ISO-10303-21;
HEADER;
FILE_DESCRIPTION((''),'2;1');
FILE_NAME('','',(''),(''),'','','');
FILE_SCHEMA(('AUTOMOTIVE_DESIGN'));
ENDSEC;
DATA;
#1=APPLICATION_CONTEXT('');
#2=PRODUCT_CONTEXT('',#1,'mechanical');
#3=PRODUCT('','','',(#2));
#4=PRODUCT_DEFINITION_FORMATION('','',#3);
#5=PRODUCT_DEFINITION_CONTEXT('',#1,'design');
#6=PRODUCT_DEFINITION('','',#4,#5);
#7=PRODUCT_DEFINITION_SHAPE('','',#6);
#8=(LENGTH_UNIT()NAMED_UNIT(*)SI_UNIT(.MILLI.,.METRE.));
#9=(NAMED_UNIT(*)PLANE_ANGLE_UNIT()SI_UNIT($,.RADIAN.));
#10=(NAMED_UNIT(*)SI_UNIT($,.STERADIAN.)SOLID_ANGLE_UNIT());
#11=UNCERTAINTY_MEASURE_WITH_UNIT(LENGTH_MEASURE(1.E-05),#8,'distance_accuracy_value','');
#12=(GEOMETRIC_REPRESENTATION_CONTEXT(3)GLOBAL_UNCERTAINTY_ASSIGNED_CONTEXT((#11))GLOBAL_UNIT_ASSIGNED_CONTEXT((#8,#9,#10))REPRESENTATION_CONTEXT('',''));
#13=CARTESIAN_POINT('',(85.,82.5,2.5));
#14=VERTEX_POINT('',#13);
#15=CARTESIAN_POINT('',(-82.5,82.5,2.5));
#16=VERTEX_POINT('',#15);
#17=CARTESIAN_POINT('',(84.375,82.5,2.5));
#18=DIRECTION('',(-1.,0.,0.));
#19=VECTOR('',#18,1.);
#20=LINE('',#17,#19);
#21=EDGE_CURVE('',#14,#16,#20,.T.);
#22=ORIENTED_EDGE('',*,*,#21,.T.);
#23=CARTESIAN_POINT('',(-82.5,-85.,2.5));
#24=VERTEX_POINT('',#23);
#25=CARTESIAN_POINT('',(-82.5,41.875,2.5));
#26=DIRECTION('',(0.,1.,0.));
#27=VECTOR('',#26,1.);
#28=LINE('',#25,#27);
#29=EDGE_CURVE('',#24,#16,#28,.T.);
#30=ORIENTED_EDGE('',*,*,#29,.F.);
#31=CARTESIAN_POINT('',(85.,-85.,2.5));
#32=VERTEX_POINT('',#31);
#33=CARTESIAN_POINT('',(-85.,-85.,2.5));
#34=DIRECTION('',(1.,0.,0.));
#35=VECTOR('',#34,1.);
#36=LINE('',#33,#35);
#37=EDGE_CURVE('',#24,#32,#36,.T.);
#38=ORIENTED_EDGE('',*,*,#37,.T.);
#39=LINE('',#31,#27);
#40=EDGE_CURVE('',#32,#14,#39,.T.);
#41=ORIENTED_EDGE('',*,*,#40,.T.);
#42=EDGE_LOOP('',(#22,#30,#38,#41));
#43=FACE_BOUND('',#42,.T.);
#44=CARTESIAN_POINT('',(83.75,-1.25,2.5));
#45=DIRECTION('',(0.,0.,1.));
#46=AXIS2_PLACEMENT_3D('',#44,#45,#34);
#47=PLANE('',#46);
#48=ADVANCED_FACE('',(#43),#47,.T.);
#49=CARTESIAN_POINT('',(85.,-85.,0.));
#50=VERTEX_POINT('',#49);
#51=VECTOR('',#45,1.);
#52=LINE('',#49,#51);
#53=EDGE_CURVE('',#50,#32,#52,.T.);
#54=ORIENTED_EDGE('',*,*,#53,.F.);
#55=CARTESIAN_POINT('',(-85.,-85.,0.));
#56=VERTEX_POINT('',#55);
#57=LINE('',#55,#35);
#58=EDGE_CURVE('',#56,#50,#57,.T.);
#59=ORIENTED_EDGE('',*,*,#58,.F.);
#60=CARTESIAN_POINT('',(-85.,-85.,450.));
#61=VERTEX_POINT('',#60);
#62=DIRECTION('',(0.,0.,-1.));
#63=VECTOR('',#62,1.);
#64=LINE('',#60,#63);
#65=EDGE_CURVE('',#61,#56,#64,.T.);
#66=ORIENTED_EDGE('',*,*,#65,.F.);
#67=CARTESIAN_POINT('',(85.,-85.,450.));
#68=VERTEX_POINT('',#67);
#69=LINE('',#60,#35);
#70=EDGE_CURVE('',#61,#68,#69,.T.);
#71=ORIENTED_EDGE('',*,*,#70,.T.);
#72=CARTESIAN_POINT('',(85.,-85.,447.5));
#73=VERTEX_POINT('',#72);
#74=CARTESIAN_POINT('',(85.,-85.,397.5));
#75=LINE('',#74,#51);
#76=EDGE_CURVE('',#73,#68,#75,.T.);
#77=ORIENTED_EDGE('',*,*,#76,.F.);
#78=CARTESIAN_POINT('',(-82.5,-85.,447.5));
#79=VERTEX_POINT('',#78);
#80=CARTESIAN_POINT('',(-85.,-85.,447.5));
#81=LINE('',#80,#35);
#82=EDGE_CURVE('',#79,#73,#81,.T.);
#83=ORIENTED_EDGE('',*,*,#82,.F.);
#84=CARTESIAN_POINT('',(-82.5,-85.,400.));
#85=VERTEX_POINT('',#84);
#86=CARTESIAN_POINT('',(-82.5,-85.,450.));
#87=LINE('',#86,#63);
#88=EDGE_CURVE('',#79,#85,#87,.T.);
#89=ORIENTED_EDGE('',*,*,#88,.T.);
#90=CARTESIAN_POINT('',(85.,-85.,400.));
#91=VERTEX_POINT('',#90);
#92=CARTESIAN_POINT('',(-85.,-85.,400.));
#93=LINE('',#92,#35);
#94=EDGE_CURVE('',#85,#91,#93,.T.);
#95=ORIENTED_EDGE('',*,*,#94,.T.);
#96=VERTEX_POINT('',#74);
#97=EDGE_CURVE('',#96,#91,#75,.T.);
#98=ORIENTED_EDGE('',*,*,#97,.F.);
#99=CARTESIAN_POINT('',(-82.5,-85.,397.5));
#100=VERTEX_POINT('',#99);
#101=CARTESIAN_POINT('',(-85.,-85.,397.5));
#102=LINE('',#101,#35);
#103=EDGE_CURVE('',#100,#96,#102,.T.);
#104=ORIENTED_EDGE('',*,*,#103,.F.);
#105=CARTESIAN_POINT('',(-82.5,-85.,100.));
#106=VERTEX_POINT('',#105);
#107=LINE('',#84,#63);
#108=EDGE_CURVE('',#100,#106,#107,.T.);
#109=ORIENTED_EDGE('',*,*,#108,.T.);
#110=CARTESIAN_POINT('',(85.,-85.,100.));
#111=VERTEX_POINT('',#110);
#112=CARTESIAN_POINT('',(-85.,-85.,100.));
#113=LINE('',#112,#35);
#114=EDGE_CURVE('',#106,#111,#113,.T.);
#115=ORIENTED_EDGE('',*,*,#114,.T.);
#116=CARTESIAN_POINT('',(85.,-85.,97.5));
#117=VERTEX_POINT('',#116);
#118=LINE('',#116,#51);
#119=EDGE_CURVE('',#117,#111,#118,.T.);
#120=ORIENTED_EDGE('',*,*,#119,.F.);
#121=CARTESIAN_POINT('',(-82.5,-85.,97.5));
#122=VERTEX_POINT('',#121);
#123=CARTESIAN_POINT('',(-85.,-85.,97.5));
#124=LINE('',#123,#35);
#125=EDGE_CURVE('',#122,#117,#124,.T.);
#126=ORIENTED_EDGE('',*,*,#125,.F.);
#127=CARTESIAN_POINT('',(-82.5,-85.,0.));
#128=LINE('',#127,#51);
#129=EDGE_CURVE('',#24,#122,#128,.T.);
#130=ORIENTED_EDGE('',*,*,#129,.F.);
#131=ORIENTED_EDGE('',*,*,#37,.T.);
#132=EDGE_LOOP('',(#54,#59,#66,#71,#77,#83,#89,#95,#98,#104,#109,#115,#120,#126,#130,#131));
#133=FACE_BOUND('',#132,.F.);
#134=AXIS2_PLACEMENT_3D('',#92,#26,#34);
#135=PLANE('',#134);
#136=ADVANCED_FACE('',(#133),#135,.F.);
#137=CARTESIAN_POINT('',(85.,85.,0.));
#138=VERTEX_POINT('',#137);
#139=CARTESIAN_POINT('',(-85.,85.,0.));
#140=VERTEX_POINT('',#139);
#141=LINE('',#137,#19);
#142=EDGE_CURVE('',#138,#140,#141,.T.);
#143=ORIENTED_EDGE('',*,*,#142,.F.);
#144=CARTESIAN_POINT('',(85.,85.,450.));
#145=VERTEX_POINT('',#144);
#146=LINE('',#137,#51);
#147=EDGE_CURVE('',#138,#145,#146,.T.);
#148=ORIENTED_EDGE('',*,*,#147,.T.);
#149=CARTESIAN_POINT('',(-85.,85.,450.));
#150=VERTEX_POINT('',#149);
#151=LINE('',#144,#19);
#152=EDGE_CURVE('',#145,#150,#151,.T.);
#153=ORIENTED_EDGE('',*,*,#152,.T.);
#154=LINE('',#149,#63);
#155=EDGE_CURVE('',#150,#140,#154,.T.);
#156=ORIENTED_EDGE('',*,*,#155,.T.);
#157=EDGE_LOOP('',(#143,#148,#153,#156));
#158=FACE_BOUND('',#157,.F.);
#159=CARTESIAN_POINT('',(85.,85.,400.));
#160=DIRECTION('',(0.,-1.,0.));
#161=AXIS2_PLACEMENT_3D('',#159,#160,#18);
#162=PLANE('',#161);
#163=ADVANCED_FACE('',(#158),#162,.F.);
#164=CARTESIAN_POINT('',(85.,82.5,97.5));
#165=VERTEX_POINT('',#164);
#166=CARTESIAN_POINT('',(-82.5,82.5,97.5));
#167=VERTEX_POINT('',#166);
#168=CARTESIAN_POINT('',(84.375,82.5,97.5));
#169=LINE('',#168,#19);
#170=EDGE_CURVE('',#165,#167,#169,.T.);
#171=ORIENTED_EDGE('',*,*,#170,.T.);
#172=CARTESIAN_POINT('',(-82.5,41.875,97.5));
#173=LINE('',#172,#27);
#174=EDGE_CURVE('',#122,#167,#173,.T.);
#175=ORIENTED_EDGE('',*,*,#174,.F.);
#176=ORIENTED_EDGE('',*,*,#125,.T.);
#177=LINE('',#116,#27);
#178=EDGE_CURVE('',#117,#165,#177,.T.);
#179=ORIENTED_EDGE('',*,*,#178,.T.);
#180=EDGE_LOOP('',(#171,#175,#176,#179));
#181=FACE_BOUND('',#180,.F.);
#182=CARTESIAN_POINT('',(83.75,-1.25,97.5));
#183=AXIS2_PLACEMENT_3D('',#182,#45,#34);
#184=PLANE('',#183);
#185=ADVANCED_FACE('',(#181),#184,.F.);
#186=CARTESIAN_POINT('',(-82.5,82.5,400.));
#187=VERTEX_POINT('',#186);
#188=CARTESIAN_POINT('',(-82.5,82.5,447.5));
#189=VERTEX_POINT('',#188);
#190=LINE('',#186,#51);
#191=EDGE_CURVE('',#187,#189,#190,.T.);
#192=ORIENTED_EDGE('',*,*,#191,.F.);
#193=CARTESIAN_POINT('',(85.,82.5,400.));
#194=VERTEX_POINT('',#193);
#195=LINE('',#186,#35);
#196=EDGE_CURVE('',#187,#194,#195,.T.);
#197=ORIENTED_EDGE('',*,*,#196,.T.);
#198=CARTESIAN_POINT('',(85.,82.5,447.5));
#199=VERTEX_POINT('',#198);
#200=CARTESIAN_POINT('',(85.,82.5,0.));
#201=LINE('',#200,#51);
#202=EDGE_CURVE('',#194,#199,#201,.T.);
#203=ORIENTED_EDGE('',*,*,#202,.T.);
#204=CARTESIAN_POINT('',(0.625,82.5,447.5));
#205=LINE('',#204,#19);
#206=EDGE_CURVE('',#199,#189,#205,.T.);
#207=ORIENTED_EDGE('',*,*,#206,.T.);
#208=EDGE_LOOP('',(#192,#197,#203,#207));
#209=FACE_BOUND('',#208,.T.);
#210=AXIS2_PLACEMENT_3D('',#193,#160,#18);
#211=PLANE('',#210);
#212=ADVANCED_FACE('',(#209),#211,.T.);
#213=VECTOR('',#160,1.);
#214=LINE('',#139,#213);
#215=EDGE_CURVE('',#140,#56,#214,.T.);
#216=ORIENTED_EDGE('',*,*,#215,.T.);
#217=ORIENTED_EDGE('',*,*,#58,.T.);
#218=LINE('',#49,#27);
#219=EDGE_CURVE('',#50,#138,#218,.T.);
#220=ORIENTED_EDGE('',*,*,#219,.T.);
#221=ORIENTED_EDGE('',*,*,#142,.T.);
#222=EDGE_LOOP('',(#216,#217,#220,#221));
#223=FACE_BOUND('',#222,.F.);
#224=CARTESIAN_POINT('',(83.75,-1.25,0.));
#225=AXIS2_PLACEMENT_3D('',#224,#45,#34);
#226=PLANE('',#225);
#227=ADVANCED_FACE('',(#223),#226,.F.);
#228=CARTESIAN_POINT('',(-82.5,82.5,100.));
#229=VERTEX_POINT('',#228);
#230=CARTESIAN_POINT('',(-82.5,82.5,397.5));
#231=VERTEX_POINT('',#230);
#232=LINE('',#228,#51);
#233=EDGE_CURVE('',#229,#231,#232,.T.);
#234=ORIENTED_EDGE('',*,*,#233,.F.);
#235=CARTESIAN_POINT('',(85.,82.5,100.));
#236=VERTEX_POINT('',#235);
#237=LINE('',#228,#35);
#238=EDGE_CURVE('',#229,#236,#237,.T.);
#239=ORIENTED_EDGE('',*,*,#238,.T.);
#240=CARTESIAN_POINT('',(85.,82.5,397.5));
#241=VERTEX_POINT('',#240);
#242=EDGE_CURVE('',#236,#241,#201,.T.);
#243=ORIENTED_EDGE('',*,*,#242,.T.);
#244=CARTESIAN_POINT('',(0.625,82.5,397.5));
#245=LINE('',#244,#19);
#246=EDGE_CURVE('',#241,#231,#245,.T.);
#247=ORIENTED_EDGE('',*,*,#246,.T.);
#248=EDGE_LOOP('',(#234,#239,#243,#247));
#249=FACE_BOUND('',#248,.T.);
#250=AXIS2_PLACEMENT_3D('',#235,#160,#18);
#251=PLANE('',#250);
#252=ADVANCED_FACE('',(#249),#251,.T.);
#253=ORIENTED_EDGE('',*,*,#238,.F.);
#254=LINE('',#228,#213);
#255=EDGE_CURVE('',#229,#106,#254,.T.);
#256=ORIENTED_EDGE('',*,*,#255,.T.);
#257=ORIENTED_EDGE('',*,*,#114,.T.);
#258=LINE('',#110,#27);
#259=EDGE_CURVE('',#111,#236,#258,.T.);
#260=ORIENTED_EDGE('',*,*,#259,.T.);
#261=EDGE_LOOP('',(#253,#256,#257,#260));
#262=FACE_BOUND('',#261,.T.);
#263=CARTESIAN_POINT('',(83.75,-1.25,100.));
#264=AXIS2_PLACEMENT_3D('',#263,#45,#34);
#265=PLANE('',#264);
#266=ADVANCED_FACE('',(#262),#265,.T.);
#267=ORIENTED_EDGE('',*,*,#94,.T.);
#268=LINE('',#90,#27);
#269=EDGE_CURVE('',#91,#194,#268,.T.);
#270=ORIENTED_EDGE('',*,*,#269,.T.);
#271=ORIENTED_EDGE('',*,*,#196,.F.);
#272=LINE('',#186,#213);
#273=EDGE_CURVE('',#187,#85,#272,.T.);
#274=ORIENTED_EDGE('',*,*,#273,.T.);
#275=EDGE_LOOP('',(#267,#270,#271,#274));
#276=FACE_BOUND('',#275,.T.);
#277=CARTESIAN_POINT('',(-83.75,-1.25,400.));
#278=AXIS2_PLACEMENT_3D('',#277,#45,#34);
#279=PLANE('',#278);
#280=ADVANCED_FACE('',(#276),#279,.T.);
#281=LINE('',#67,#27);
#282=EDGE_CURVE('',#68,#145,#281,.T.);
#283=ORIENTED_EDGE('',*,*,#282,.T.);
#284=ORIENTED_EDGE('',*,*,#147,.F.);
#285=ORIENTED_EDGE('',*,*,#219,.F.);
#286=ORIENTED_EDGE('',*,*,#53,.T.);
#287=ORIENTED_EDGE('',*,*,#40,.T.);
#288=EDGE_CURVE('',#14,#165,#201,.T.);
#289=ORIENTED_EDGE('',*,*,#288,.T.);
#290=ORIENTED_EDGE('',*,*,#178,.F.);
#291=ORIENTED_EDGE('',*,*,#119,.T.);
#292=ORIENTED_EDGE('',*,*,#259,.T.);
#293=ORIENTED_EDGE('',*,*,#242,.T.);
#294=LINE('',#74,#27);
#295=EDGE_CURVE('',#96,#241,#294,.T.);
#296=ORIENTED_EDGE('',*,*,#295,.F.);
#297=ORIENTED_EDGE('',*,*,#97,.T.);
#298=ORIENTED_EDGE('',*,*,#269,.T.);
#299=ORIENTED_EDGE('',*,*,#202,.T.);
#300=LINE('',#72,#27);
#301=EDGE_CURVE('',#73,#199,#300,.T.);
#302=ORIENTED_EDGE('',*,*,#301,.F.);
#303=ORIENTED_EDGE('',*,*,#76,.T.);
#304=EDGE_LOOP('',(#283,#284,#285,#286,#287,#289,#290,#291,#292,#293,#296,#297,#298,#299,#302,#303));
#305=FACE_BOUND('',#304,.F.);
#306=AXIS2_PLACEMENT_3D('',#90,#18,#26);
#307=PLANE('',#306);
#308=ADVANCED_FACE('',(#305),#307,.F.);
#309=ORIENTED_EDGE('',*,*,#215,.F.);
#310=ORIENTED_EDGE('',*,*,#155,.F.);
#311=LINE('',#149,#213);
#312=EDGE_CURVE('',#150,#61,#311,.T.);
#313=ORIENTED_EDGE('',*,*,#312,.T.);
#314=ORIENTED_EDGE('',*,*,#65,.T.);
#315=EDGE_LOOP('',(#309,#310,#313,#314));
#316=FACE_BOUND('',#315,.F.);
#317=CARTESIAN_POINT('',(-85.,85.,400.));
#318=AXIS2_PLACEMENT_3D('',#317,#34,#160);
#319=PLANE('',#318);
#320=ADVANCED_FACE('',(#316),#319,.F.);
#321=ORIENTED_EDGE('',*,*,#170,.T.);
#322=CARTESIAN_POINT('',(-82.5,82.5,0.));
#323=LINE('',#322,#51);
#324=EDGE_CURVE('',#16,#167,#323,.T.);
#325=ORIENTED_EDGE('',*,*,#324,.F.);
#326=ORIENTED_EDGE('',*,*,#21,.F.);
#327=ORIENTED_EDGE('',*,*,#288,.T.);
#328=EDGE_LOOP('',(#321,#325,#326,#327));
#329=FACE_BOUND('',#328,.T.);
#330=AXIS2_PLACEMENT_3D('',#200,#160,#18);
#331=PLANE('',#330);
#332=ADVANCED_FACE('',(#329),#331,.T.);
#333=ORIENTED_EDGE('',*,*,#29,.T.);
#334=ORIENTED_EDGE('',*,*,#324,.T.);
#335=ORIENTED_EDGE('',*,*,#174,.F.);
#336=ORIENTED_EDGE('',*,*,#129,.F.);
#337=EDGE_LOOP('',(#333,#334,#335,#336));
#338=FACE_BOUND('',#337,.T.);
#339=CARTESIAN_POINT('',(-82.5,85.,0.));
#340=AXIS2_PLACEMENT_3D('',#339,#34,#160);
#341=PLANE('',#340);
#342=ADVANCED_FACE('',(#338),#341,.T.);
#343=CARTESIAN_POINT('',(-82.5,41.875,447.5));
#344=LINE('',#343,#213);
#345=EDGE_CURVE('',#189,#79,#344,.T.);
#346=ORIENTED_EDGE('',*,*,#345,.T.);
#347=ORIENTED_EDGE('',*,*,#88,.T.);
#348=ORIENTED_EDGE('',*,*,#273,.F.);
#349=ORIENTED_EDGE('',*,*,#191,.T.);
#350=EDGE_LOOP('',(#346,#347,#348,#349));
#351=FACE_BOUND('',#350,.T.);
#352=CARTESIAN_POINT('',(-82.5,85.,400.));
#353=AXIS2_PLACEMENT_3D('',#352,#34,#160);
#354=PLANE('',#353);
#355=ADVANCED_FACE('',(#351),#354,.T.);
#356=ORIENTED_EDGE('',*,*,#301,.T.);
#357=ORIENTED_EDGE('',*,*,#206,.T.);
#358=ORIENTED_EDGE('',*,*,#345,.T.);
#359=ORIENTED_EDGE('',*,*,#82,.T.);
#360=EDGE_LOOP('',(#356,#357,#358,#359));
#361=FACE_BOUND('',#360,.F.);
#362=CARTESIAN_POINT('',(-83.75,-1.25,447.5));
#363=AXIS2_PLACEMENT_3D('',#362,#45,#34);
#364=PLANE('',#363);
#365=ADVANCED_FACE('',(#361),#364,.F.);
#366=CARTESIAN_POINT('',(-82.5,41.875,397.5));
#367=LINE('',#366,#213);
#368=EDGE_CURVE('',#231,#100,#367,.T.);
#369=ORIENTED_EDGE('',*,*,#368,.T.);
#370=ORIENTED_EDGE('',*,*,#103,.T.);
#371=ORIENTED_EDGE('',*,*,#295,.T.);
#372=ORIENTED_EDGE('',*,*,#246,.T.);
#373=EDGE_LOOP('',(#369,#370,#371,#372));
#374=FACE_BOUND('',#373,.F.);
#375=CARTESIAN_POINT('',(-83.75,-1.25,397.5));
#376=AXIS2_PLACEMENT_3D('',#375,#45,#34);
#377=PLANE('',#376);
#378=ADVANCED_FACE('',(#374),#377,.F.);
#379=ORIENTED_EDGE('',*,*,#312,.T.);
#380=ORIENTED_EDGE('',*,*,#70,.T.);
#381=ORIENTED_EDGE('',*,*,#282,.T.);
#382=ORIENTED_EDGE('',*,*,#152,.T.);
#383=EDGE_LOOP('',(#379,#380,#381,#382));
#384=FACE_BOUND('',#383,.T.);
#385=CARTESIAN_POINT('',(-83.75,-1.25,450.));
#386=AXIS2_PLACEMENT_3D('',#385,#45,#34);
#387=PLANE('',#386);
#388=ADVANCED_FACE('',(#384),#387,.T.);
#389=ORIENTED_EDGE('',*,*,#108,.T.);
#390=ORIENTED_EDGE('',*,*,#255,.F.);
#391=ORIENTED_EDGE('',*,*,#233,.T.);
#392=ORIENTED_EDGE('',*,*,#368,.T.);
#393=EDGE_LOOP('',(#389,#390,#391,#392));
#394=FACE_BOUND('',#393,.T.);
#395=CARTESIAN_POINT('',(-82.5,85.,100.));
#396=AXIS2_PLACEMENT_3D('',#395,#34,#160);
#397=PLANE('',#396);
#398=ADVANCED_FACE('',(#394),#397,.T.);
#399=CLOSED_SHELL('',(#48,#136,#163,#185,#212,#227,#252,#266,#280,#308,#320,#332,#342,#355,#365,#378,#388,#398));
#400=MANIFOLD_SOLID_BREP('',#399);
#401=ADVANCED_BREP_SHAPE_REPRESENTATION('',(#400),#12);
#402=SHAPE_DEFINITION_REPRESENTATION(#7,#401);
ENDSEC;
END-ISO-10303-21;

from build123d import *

# Parameters (mm, degrees)
F0_W        = 167.5
F0_H        = 85
F0_W_2      = 2.5
F0_H_2      = 2.5
F0_H_3      = 82.5
F1_DEPTH    = 100
F2_T        = -2.5
F3_W        = 2.5
F3_H        = 167.5
F3_W_2      = 167.5
F3_H_2      = 2.5
F4_DEPTH    = 300
F5_T        = 2.5
F5_T3_DEPTH = 172.5
F5_T5_DEPTH = 172.5
F5_T7_DEPTH = 100
F6_DEPTH    = 50
F7_T        = 2.5
F7_T3_DEPTH = 172.5
F7_T5_DEPTH = 172.5
F7_T7_DEPTH = 100
F7_T9_DEPTH = 302.5


# Not quite as in the source:
# - a shell that OpenCascade refuses in one call is made with other operations: the cavity is built on its own and cut out


with BuildPart() as f1:
    # F0 (on Top) → F1 (new body)
    with BuildSketch(Plane.XY):
        Polygon((82.5, -85), (85, -85), (85, 82.5), (82.5, 82.5), (82.5, 0), align=None)
        with Locations((-1.25, -42.5)):
            Rectangle(F0_W, F0_H)
        with Locations((83.75, 83.75)):
            Rectangle(F0_W_2, F0_H_2)
        with Locations((-1.25, 41.25)):
            Rectangle(F0_W, F0_H_3)
        with Locations((-1.25, 83.75)):
            Rectangle(F0_W, F0_H_2)
    extrude(amount=F1_DEPTH)

    # F2
    f2_openings = [f1.faces().sort_by_distance(p)[0] for p in [
        (85, 0, 50),
        (0, -85, 50),
    ]]
    offset(amount=F2_T, openings=f2_openings)

    # F3 (on face) → F4 (join)
    with BuildSketch(Plane.XY.offset(100)):
        with Locations((-83.75, -1.25)):
            Rectangle(F3_W, F3_H)
        with Locations((1.25, -1.25)):
            Rectangle(F3_W_2, F3_H)
        with Locations((-83.75, 83.75)):
            Rectangle(F3_W, F3_H_2)
        with Locations((1.25, 83.75)):
            Rectangle(F3_W_2, F3_H_2)
    extrude(amount=F4_DEPTH)

    # F5: shell of thickness 2.5, made by hand


with BuildPart() as f5_core1:
    # F5_t2: copy of F1
    add(f1.part)

    # the walls: a layer under each face that stays
    f5_faces = [f5_core1.faces().sort_by_distance(p)[0] for p in [
        (0, 85, 200),
        (0, 0, 0),
        (1.25, -1.25, 2.5),
        (1.25, 82.5, 50),
        (-82.5, -1.25, 50),
        (1.25, -1.25, 97.5),
        (-85, 0, 200),
        (0, 0, 400),
    ]]
    thicken(f5_faces, amount=-F5_T, mode=Mode.SUBTRACT)

    # F5_s4 → F5_t3 (cut)
    with BuildSketch(Plane.YZ.offset(-85)):
        Polygon((82.475, 2.525), (82.5, 0), (85, 0), (85, 2.5), align=None)
        Polygon((82.475, 97.475), (85, 97.5), (85, 100), (82.5, 100), align=None)
    extrude(amount=F5_T3_DEPTH, mode=Mode.SUBTRACT)

    # F5_s6 → F5_t5 (cut)
    with BuildSketch(Plane.XZ.offset(-85)):
        Polygon((-82.475, 2.525), (-82.5, 0), (-85, 0), (-85, 2.5), align=None)
        Polygon((-82.475, 97.475), (-85, 97.5), (-85, 100), (-82.5, 100), align=None)
    extrude(amount=F5_T5_DEPTH, mode=Mode.SUBTRACT)

    # F5_s8 → F5_t7 (cut)
    with BuildSketch(Plane.XY):
        Polygon((-82.475, 82.475), (-82.5, 85), (-85, 85), (-85, 82.5), align=None)
    extrude(amount=F5_T7_DEPTH, mode=Mode.SUBTRACT)


with BuildPart() as f1_1:
    add(f1.part)

    # what is left inside the walls is the cavity
    f5_cavity = [f5_core1.part.solids().sort_by_distance(p)[0] for p in [
        (1.25, 82.475, 298.333333),
    ]]
    add(f5_cavity, mode=Mode.SUBTRACT)

    # F6 (add): a face of the model
    f6_faces = [f1_1.faces().sort_by_distance(p)[0] for p in [
        (0, 0, 400),
    ]]
    extrude(f6_faces, amount=F6_DEPTH)

    # F7: shell of thickness 2.5, made by hand


with BuildPart() as f7_core1:
    # F7_t2: copy of F1
    add(f1_1.part)

    # the walls: a layer under each face that stays
    f7_faces = [f7_core1.faces().sort_by_distance(p)[0] for p in [
        (0, 85, 225),
        (0, 0, 0),
        (1.25, -1.25, 2.5),
        (1.25, 82.5, 50),
        (-82.5, -1.25, 50),
        (1.25, -1.25, 97.5),
        (1.25, -1.25, 100),
        (1.25, 82.5, 248.75),
        (-82.5, -1.25, 248.75),
        (1.25, -1.25, 397.5),
        (-85, 0, 225),
        (0, 0, 450),
    ]]
    thicken(f7_faces, amount=-F7_T, mode=Mode.SUBTRACT)

    # F7_s4 → F7_t3 (cut)
    with BuildSketch(Plane.YZ.offset(-85)):
        Polygon((82.475, 2.525), (82.5, 0), (85, 0), (85, 2.5), align=None)
        Polygon((82.475, 97.475), (85, 97.5), (85, 100), (82.5, 100), align=None)
        Polygon((82.475, 100.025), (82.5, 97.5), (85, 97.5), (85, 100), align=None)
        Polygon((82.475, 397.475), (85, 397.5), (85, 400), (82.5, 400), align=None)
    extrude(amount=F7_T3_DEPTH, mode=Mode.SUBTRACT)

    # F7_s6 → F7_t5 (cut)
    with BuildSketch(Plane.XZ.offset(-85)):
        Polygon((-82.475, 2.525), (-82.5, 0), (-85, 0), (-85, 2.5), align=None)
        Polygon((-82.475, 97.475), (-85, 97.5), (-85, 100), (-82.5, 100), align=None)
        Polygon((-82.475, 100.025), (-82.5, 97.5), (-85, 97.5), (-85, 100), align=None)
        Polygon((-82.475, 397.475), (-85, 397.5), (-85, 400), (-82.5, 400), align=None)
    extrude(amount=F7_T5_DEPTH, mode=Mode.SUBTRACT)

    # F7_s8 → F7_t7 (cut)
    with BuildSketch(Plane.XY):
        Polygon((-82.475, 82.475), (-82.5, 85), (-85, 85), (-85, 82.5), align=None)
    extrude(amount=F7_T7_DEPTH, mode=Mode.SUBTRACT)

    # F7_s10 → F7_t9 (cut)
    with BuildSketch(Plane.XY.offset(97.5)):
        Polygon((-82.475, 82.475), (-82.5, 85), (-85, 85), (-85, 82.5), align=None)
    extrude(amount=F7_T9_DEPTH, mode=Mode.SUBTRACT)


with BuildPart() as f1_2:
    add(f1_1.part)

    # what is left inside the walls is the cavity
    f7_cavity = [f7_core1.part.solids().sort_by_distance(p)[0] for p in [
        (1.25, -29.166667, 447.475),
    ]]
    add(f7_cavity, mode=Mode.SUBTRACT)


solid = f1_2.part
